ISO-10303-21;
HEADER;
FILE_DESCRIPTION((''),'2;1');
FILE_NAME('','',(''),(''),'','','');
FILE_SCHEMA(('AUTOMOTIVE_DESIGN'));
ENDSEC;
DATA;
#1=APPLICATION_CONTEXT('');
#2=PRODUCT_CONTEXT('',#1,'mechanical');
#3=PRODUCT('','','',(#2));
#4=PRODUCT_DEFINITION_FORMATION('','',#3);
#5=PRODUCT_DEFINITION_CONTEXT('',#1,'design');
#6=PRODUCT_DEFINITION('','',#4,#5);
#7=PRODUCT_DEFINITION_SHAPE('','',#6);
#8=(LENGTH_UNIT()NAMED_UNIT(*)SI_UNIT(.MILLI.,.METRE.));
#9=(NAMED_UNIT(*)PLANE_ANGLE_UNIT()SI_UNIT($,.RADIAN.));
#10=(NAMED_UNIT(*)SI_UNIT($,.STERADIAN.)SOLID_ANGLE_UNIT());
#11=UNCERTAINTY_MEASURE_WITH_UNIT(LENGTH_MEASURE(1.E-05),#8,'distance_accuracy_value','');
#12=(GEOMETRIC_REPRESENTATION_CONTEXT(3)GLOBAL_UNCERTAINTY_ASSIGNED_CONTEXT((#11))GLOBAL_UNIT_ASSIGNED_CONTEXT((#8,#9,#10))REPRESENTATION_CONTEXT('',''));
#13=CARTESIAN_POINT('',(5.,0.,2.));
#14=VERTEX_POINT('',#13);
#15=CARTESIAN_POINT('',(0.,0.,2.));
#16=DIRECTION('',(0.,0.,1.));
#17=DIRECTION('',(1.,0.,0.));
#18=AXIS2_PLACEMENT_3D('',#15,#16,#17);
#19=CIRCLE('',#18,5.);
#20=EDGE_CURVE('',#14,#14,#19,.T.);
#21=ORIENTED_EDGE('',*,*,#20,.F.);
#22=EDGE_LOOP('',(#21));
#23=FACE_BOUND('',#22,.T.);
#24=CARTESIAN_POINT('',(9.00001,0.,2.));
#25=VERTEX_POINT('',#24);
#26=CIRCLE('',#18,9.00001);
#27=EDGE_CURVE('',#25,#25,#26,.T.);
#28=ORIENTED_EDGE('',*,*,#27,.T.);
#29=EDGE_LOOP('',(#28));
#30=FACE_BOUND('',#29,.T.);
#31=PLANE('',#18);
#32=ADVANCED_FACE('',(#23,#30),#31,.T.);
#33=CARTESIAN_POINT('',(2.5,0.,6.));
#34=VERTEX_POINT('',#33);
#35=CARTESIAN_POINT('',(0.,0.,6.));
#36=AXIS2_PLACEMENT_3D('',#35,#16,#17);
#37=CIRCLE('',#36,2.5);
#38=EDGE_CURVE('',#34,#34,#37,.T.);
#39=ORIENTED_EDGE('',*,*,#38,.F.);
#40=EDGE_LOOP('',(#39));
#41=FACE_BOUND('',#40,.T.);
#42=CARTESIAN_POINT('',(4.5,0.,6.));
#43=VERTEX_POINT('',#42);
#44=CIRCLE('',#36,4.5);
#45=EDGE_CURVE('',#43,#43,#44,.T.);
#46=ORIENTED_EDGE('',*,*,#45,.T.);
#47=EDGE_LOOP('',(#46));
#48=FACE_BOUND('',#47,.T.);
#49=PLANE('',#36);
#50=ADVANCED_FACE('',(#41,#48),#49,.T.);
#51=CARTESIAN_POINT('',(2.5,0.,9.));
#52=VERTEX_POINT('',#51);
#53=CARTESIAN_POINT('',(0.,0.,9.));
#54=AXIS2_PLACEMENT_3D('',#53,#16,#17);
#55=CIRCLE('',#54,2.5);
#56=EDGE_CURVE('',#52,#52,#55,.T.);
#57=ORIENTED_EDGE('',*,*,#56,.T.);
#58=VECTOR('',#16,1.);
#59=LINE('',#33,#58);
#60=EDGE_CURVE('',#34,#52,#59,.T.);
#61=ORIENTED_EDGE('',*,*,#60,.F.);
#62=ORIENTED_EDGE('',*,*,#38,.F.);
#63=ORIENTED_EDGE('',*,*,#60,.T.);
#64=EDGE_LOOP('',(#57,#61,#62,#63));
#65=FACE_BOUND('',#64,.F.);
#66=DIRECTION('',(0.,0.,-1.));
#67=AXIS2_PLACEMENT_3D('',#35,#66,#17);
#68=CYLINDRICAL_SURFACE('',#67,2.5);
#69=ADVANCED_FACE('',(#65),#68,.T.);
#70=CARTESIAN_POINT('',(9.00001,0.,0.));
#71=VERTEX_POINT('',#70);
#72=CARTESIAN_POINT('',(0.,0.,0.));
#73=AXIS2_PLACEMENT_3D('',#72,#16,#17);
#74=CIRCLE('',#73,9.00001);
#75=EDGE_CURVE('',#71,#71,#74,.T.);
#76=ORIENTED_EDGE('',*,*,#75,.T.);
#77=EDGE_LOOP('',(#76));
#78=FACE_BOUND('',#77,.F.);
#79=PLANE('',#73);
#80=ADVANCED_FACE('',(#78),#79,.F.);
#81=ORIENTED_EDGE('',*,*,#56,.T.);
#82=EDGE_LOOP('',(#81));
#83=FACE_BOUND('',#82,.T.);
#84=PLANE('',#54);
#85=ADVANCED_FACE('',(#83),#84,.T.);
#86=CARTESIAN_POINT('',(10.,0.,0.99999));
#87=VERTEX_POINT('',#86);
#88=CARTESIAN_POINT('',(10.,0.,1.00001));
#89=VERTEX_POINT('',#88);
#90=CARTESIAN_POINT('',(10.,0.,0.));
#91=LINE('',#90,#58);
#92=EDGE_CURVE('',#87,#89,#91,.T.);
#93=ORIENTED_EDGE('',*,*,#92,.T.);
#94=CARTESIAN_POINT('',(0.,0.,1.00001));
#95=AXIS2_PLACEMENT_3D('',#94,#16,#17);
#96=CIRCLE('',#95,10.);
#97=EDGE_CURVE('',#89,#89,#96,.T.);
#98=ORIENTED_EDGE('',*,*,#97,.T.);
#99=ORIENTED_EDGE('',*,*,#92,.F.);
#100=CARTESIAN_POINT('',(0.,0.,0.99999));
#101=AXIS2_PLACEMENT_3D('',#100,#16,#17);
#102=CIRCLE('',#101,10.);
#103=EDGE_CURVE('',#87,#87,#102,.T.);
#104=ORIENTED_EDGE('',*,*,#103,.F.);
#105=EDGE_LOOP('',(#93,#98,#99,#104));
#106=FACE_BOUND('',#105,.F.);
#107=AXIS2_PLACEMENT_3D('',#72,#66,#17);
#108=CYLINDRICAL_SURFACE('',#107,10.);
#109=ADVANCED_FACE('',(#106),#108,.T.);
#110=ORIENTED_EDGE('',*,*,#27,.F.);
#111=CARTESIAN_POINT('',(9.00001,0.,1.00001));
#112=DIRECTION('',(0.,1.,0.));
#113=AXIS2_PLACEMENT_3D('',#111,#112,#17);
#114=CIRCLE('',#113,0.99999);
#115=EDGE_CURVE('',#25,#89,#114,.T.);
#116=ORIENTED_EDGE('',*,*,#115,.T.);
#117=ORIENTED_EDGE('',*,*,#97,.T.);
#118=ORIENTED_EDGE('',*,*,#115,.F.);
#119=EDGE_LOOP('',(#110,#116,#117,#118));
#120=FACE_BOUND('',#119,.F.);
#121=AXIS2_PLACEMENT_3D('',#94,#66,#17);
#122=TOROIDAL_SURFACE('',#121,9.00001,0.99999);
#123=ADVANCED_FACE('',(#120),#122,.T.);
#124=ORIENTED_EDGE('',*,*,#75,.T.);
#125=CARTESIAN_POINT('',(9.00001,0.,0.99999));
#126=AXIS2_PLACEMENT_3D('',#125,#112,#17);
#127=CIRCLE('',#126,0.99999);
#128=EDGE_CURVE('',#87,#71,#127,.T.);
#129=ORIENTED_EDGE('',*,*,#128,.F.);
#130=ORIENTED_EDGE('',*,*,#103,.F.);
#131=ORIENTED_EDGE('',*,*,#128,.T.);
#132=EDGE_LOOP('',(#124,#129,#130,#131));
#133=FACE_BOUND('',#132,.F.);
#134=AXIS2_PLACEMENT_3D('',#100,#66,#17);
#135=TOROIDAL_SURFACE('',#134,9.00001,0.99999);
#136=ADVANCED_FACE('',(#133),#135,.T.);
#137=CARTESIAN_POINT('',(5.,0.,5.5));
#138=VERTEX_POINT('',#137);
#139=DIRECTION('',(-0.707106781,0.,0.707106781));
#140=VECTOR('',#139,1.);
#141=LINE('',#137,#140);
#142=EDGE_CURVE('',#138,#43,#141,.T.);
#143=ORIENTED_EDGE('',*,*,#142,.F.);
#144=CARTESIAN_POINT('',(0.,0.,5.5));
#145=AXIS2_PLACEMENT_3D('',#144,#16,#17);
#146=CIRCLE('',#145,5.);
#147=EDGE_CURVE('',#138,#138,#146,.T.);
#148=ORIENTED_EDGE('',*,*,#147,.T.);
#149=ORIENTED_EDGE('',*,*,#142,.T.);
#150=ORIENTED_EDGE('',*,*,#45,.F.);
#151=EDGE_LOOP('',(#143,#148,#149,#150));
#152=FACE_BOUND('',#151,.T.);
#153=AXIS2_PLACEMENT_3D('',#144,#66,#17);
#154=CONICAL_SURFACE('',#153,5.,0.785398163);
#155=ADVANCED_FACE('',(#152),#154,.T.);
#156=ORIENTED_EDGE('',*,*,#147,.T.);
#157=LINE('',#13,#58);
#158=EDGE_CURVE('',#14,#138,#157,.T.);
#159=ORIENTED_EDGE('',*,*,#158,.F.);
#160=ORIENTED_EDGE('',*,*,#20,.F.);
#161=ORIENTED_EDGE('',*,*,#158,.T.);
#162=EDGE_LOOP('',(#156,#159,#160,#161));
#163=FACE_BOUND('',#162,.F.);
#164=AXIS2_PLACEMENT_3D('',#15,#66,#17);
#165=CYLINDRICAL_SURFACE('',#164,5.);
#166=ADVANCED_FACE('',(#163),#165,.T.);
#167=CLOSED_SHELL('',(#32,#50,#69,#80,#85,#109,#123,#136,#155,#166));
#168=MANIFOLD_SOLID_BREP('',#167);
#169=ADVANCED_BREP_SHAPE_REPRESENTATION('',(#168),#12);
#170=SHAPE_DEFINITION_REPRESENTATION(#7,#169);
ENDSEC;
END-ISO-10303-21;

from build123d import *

# Parameters (mm, degrees)
F0_R     = 10
F1_DEPTH = 2
F2_R     = 5
F3_DEPTH = 4
F4_SIZE  = 0.5
F5_R     = 0.99999
F6_R     = 2.5
F7_DEPTH = 3


# Not quite as in the source:
# - a fillet or chamfer is up to 0.001 mm smaller than in the source, because OpenCascade refuses the exact size


with BuildPart() as f1:
    # F0 (on Top) → F1 (new body)
    with BuildSketch(Plane.XY):
        Circle(F0_R)
    extrude(amount=F1_DEPTH)

    # F2 (on face) → F3 (join)
    with BuildSketch(Plane.XY.offset(2)):
        Circle(F2_R)
    extrude(amount=F3_DEPTH)

    # F4
    f4_edges = [f1.edges().sort_by_distance(p)[0] for p in [
        (-5, 0, 6),
    ]]
    chamfer(f4_edges, length=F4_SIZE)

    # F5 (radius 1 in the source; OpenCascade refuses exactly that, so slightly less here)
    f5_edges = [f1.edges().sort_by_distance(p)[0] for p in [
        (-10, 0, 0),
        (-10, 0, 2),
    ]]
    fillet(f5_edges, radius=F5_R)

    # F6 (on face) → F7 (join)
    with BuildSketch(Plane.XY.offset(6)):
        Circle(F6_R)
    extrude(amount=F7_DEPTH)


solid = f1.part
